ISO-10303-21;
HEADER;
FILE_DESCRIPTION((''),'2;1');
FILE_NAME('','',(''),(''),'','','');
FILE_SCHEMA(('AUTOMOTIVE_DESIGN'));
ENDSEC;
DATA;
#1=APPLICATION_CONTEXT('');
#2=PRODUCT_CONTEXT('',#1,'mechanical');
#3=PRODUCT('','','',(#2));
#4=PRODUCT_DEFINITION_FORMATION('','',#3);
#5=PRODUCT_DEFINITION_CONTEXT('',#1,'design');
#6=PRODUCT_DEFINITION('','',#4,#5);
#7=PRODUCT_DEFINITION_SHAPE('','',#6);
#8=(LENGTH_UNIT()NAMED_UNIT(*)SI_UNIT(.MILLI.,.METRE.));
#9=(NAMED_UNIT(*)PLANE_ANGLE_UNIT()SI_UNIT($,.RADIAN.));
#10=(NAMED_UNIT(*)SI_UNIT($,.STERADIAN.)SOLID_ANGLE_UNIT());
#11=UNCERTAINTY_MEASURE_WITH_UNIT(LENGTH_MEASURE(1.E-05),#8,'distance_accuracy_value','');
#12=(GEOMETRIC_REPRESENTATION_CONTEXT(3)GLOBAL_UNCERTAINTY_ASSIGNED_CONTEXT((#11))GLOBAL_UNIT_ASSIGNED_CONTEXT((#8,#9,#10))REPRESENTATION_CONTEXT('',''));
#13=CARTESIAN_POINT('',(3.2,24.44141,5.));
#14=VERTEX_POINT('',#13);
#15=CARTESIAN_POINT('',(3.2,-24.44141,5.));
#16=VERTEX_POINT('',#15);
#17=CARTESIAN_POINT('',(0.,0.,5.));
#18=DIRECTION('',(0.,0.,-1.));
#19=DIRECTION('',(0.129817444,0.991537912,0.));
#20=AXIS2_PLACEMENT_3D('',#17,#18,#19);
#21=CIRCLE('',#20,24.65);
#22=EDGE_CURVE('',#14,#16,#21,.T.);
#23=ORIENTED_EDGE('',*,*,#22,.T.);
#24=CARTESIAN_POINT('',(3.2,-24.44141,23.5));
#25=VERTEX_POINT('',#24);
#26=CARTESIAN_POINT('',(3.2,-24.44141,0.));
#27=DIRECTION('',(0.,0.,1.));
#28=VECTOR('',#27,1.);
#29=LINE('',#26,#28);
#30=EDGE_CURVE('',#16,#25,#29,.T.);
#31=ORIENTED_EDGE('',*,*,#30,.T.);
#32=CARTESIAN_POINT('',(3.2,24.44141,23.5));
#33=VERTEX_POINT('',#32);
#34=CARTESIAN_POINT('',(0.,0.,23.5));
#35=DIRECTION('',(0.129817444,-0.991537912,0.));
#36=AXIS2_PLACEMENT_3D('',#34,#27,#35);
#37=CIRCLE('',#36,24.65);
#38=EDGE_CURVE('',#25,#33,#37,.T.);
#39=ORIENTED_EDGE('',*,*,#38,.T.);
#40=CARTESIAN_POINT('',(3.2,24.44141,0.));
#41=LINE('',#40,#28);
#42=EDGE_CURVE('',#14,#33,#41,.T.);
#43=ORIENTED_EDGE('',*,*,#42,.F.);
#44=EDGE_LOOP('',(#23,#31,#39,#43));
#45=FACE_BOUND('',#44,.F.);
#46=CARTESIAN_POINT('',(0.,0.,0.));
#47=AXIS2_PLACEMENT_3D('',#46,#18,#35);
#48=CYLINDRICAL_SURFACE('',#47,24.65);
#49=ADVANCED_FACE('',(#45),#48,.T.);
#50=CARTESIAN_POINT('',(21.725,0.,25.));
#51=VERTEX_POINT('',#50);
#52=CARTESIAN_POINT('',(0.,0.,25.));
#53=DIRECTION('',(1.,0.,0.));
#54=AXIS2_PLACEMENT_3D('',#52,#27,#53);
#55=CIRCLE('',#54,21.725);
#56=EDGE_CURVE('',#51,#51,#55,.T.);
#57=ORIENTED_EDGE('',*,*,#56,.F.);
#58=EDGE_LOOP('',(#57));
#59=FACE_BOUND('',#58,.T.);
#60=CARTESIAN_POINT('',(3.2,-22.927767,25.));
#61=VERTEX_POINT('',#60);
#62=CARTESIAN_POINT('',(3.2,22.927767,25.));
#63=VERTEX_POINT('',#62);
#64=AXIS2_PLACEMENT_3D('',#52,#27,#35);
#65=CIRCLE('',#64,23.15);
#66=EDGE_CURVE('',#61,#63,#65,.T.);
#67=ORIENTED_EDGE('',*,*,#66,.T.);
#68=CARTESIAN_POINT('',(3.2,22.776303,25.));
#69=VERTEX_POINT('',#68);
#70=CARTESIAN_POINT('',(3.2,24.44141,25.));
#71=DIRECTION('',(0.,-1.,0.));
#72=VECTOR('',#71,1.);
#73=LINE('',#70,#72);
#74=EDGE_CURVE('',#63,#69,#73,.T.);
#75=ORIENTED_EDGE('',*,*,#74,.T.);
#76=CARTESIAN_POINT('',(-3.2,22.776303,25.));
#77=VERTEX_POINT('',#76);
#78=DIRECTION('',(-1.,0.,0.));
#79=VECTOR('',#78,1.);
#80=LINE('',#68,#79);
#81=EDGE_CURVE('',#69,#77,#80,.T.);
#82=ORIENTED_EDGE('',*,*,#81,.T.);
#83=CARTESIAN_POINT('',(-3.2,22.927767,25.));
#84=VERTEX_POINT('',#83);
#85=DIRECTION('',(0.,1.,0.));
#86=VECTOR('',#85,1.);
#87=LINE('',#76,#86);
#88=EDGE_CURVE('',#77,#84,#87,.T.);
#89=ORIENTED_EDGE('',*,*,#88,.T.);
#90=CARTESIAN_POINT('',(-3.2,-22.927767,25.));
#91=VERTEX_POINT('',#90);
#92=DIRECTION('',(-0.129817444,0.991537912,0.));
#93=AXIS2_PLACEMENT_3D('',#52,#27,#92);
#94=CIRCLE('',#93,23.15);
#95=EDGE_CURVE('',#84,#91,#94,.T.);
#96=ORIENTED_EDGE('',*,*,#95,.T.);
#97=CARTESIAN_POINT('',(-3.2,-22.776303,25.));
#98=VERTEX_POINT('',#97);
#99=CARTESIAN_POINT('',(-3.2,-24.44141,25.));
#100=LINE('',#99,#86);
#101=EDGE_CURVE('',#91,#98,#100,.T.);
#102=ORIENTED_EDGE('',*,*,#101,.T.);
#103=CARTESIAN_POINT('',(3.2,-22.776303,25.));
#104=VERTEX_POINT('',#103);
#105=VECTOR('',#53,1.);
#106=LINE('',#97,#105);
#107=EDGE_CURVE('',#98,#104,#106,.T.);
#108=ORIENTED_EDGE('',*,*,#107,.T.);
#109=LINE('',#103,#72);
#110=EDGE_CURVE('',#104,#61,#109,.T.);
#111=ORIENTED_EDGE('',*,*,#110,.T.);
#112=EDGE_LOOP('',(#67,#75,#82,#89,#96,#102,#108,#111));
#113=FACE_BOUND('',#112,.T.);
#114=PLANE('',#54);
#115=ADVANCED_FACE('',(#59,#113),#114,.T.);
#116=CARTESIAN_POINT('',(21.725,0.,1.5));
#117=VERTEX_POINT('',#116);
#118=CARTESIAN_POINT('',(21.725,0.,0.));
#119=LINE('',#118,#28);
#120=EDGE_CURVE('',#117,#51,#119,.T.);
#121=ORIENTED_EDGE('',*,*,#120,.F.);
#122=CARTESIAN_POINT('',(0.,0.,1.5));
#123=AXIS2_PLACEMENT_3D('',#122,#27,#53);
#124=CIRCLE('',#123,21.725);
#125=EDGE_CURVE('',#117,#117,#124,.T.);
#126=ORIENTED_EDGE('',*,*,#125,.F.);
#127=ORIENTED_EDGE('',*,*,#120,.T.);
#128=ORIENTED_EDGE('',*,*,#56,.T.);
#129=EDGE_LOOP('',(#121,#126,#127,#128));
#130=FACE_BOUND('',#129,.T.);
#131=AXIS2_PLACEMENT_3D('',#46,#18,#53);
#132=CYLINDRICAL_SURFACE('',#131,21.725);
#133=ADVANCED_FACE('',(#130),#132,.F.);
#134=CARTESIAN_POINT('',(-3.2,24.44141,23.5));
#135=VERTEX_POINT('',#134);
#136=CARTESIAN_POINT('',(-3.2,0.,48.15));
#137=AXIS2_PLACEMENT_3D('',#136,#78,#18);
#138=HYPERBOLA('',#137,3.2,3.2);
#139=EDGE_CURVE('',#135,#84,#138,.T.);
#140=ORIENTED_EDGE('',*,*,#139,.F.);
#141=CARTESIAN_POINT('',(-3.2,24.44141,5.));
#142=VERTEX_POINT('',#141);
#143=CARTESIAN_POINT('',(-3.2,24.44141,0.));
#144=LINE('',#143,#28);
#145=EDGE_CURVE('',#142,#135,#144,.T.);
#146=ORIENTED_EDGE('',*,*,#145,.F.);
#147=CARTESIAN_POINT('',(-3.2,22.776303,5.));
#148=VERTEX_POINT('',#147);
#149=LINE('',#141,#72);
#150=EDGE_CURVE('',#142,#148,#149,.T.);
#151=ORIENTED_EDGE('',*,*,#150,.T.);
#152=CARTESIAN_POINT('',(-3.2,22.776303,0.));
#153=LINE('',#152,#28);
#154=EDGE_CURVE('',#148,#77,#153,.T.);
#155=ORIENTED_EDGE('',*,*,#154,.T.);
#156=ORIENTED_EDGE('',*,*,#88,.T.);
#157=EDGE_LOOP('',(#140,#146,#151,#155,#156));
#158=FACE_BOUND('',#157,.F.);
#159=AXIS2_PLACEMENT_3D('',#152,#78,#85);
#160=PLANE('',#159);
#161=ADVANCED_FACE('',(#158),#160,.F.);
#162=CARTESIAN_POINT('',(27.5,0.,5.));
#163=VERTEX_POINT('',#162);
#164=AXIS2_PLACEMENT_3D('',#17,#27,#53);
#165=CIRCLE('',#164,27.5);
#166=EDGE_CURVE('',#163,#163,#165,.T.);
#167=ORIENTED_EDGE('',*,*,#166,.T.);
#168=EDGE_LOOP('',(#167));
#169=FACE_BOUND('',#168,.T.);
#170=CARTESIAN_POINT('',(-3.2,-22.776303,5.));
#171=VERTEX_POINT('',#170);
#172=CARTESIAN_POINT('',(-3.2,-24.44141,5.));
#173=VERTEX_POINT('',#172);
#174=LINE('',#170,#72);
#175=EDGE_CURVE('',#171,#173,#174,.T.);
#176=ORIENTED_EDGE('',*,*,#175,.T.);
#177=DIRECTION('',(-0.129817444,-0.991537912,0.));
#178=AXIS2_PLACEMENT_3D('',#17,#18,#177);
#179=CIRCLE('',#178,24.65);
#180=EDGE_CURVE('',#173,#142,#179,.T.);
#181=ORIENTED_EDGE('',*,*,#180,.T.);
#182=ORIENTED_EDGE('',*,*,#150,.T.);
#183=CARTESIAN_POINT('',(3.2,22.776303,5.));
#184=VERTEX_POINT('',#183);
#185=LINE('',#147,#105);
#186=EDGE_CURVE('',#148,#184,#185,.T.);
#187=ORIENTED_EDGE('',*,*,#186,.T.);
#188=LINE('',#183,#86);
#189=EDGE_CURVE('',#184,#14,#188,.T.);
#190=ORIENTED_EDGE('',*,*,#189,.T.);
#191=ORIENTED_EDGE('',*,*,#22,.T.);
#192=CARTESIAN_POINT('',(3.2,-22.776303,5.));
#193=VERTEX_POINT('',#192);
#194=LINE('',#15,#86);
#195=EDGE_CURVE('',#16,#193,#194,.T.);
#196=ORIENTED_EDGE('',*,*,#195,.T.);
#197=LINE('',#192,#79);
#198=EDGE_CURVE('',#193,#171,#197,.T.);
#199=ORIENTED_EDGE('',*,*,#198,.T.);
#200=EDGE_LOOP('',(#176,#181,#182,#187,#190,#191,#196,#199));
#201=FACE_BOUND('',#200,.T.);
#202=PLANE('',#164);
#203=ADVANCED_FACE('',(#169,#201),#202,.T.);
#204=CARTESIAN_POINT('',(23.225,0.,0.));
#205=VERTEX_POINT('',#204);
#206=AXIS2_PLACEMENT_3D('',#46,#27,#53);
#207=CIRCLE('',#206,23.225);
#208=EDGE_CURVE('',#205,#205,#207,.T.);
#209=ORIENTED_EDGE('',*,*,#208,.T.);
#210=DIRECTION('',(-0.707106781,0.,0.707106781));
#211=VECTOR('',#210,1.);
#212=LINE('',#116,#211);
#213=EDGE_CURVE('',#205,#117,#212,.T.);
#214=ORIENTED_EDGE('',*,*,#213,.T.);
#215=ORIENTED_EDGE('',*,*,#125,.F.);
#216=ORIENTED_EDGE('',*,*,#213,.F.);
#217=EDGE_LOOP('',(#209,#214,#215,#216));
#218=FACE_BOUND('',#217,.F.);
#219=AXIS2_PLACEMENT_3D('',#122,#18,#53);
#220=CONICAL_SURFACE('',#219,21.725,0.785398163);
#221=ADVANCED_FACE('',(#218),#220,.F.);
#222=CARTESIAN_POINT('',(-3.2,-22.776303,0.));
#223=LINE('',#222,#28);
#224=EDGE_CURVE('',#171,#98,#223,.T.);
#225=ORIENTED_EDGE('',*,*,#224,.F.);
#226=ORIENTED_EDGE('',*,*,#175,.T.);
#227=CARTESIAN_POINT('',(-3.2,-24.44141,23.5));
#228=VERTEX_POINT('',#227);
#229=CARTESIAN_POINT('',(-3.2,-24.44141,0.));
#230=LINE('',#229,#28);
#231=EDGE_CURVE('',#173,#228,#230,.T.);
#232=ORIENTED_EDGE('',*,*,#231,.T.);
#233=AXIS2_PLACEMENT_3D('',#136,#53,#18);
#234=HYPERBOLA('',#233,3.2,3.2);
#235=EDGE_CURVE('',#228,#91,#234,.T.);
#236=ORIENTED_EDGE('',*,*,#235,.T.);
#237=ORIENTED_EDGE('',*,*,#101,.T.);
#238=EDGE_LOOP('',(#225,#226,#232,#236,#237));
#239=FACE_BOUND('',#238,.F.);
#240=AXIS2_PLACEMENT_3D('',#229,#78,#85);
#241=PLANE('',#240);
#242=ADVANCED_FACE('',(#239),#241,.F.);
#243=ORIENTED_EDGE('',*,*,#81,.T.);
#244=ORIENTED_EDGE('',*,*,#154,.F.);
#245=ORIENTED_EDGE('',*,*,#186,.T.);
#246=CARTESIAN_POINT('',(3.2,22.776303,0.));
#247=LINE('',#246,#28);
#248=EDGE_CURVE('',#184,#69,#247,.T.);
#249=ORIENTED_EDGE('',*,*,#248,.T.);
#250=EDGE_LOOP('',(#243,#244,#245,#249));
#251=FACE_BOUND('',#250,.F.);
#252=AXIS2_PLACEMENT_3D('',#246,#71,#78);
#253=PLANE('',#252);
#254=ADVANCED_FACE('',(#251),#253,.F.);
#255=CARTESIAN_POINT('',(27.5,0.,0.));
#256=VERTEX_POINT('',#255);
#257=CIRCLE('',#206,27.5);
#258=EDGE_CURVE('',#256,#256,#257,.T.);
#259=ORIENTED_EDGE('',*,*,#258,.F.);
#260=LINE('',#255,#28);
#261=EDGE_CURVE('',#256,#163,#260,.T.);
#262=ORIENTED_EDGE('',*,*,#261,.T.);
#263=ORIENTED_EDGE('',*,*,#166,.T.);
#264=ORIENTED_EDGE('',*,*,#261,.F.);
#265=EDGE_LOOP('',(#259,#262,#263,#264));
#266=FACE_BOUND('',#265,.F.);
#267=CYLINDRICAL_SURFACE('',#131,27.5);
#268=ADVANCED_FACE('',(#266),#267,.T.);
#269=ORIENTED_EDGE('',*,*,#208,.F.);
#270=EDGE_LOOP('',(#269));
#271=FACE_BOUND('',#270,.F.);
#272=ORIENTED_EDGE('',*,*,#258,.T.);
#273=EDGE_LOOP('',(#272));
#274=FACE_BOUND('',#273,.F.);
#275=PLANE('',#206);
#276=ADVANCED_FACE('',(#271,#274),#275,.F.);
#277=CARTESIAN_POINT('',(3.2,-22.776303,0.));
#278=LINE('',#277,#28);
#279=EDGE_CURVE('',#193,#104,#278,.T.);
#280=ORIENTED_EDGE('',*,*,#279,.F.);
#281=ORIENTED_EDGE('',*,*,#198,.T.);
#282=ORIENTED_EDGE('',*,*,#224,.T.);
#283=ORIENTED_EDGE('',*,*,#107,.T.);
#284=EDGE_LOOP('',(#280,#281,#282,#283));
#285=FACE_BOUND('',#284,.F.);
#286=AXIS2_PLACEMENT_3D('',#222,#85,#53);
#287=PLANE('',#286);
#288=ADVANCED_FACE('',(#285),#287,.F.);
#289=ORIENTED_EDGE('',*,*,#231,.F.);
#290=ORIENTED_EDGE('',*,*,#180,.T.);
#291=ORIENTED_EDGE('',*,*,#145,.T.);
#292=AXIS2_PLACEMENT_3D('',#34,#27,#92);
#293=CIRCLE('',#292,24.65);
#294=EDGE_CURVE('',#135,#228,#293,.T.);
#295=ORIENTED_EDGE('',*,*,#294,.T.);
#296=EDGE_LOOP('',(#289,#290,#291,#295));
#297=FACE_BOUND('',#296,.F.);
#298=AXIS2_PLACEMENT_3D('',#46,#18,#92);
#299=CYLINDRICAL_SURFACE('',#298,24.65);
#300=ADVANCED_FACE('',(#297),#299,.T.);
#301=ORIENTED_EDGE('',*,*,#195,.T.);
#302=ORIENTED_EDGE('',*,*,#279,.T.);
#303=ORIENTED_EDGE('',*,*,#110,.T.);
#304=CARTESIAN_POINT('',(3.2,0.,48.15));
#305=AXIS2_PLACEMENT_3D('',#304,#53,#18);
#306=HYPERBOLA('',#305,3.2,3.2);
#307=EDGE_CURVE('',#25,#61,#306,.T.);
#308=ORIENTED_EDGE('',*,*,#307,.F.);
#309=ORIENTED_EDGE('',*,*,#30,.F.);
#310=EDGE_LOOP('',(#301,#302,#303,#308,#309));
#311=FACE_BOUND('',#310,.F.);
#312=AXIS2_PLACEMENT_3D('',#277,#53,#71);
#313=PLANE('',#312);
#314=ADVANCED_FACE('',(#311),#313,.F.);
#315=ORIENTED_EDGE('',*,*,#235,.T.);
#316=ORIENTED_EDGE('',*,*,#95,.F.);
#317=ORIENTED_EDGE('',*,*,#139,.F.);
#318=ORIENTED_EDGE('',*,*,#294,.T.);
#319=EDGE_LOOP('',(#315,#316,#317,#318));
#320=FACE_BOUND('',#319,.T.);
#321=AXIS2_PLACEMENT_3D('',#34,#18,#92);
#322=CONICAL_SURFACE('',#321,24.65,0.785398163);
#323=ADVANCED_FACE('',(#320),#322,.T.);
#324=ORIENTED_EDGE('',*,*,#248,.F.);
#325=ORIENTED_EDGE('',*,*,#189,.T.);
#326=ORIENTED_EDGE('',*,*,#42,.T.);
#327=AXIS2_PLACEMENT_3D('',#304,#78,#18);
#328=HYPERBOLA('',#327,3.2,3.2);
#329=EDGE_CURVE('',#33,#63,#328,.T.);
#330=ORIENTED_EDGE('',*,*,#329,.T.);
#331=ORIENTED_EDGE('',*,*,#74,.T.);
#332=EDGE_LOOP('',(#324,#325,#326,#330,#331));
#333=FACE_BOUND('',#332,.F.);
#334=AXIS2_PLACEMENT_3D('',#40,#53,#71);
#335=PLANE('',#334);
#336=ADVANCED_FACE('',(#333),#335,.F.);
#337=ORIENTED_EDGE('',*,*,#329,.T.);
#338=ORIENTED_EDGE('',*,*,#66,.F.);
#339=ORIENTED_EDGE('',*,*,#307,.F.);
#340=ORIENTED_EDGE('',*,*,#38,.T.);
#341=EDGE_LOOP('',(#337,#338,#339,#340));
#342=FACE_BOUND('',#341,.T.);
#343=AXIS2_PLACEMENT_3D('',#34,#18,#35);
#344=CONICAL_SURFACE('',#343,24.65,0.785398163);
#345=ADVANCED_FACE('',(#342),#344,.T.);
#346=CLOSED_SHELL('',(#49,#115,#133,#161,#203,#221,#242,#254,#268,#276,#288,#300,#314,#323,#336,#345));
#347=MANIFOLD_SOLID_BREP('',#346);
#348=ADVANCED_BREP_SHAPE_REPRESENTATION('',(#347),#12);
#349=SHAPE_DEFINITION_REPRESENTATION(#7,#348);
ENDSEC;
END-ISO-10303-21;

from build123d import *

# Parameters (mm, degrees)
F0_R     = 21.725
F1_DEPTH = 25
F0_R_2   = 27.5
F2_DEPTH = 5
F3_SIZE  = 1.5


# Not quite as in the source:
# - a feature names something its author has since deleted; it is built from what else it names


with BuildPart() as f1:
    # F0 (on Top) → F1 (new body)
    with BuildSketch(Plane.XY):
        with BuildLine():
            Line((-3.2, 22.7763034753), (-3.2, 24.4414095338))
            ThreePointArc((-3.2, 24.4414095338), (-24.65, 0), (-3.2, -24.4414095338))
            Line((-3.2, -24.4414095338), (-3.2, -22.7763034753))
            Line((-3.2, -22.7763034753), (3.2, -22.7763034753))
            Line((3.2, -22.7763034753), (3.2, -24.4414095338))
            ThreePointArc((3.2, -24.4414095338), (24.65, 0), (3.2, 24.4414095338))
            Line((3.2, 24.4414095338), (3.2, 22.7763034753))
            Line((3.2, 22.7763034753), (-3.2, 22.7763034753))
        make_face()
        Circle(F0_R, mode=Mode.SUBTRACT)
    extrude(amount=F1_DEPTH)

    # F0 (on Top) → F2 (join)
    with BuildSketch(Plane.XY):
        Circle(F0_R_2)
        with BuildLine():
            ThreePointArc((-3.2, -24.4414095338), (-24.65, 0), (-3.2, 24.4414095338))
            Line((-3.2, 24.4414095338), (-3.2, 22.7763034753))
            Line((-3.2, 22.7763034753), (3.2, 22.7763034753))
            Line((3.2, 22.7763034753), (3.2, 24.4414095338))
            ThreePointArc((3.2, 24.4414095338), (24.65, 0), (3.2, -24.4414095338))
            Line((3.2, -24.4414095338), (3.2, -22.7763034753))
            Line((3.2, -22.7763034753), (-3.2, -22.7763034753))
            Line((-3.2, -22.7763034753), (-3.2, -24.4414095338))
        make_face(mode=Mode.SUBTRACT)
    extrude(amount=F2_DEPTH)

    # F3
    f3_edges = [f1.edges().sort_by_distance(p)[0] for p in [
        (-24.65, 0, 25),
        (24.65, 0, 25),
        (-21.725, 0, 0),
    ]]
    chamfer(f3_edges, length=F3_SIZE)


solid = f1.part
